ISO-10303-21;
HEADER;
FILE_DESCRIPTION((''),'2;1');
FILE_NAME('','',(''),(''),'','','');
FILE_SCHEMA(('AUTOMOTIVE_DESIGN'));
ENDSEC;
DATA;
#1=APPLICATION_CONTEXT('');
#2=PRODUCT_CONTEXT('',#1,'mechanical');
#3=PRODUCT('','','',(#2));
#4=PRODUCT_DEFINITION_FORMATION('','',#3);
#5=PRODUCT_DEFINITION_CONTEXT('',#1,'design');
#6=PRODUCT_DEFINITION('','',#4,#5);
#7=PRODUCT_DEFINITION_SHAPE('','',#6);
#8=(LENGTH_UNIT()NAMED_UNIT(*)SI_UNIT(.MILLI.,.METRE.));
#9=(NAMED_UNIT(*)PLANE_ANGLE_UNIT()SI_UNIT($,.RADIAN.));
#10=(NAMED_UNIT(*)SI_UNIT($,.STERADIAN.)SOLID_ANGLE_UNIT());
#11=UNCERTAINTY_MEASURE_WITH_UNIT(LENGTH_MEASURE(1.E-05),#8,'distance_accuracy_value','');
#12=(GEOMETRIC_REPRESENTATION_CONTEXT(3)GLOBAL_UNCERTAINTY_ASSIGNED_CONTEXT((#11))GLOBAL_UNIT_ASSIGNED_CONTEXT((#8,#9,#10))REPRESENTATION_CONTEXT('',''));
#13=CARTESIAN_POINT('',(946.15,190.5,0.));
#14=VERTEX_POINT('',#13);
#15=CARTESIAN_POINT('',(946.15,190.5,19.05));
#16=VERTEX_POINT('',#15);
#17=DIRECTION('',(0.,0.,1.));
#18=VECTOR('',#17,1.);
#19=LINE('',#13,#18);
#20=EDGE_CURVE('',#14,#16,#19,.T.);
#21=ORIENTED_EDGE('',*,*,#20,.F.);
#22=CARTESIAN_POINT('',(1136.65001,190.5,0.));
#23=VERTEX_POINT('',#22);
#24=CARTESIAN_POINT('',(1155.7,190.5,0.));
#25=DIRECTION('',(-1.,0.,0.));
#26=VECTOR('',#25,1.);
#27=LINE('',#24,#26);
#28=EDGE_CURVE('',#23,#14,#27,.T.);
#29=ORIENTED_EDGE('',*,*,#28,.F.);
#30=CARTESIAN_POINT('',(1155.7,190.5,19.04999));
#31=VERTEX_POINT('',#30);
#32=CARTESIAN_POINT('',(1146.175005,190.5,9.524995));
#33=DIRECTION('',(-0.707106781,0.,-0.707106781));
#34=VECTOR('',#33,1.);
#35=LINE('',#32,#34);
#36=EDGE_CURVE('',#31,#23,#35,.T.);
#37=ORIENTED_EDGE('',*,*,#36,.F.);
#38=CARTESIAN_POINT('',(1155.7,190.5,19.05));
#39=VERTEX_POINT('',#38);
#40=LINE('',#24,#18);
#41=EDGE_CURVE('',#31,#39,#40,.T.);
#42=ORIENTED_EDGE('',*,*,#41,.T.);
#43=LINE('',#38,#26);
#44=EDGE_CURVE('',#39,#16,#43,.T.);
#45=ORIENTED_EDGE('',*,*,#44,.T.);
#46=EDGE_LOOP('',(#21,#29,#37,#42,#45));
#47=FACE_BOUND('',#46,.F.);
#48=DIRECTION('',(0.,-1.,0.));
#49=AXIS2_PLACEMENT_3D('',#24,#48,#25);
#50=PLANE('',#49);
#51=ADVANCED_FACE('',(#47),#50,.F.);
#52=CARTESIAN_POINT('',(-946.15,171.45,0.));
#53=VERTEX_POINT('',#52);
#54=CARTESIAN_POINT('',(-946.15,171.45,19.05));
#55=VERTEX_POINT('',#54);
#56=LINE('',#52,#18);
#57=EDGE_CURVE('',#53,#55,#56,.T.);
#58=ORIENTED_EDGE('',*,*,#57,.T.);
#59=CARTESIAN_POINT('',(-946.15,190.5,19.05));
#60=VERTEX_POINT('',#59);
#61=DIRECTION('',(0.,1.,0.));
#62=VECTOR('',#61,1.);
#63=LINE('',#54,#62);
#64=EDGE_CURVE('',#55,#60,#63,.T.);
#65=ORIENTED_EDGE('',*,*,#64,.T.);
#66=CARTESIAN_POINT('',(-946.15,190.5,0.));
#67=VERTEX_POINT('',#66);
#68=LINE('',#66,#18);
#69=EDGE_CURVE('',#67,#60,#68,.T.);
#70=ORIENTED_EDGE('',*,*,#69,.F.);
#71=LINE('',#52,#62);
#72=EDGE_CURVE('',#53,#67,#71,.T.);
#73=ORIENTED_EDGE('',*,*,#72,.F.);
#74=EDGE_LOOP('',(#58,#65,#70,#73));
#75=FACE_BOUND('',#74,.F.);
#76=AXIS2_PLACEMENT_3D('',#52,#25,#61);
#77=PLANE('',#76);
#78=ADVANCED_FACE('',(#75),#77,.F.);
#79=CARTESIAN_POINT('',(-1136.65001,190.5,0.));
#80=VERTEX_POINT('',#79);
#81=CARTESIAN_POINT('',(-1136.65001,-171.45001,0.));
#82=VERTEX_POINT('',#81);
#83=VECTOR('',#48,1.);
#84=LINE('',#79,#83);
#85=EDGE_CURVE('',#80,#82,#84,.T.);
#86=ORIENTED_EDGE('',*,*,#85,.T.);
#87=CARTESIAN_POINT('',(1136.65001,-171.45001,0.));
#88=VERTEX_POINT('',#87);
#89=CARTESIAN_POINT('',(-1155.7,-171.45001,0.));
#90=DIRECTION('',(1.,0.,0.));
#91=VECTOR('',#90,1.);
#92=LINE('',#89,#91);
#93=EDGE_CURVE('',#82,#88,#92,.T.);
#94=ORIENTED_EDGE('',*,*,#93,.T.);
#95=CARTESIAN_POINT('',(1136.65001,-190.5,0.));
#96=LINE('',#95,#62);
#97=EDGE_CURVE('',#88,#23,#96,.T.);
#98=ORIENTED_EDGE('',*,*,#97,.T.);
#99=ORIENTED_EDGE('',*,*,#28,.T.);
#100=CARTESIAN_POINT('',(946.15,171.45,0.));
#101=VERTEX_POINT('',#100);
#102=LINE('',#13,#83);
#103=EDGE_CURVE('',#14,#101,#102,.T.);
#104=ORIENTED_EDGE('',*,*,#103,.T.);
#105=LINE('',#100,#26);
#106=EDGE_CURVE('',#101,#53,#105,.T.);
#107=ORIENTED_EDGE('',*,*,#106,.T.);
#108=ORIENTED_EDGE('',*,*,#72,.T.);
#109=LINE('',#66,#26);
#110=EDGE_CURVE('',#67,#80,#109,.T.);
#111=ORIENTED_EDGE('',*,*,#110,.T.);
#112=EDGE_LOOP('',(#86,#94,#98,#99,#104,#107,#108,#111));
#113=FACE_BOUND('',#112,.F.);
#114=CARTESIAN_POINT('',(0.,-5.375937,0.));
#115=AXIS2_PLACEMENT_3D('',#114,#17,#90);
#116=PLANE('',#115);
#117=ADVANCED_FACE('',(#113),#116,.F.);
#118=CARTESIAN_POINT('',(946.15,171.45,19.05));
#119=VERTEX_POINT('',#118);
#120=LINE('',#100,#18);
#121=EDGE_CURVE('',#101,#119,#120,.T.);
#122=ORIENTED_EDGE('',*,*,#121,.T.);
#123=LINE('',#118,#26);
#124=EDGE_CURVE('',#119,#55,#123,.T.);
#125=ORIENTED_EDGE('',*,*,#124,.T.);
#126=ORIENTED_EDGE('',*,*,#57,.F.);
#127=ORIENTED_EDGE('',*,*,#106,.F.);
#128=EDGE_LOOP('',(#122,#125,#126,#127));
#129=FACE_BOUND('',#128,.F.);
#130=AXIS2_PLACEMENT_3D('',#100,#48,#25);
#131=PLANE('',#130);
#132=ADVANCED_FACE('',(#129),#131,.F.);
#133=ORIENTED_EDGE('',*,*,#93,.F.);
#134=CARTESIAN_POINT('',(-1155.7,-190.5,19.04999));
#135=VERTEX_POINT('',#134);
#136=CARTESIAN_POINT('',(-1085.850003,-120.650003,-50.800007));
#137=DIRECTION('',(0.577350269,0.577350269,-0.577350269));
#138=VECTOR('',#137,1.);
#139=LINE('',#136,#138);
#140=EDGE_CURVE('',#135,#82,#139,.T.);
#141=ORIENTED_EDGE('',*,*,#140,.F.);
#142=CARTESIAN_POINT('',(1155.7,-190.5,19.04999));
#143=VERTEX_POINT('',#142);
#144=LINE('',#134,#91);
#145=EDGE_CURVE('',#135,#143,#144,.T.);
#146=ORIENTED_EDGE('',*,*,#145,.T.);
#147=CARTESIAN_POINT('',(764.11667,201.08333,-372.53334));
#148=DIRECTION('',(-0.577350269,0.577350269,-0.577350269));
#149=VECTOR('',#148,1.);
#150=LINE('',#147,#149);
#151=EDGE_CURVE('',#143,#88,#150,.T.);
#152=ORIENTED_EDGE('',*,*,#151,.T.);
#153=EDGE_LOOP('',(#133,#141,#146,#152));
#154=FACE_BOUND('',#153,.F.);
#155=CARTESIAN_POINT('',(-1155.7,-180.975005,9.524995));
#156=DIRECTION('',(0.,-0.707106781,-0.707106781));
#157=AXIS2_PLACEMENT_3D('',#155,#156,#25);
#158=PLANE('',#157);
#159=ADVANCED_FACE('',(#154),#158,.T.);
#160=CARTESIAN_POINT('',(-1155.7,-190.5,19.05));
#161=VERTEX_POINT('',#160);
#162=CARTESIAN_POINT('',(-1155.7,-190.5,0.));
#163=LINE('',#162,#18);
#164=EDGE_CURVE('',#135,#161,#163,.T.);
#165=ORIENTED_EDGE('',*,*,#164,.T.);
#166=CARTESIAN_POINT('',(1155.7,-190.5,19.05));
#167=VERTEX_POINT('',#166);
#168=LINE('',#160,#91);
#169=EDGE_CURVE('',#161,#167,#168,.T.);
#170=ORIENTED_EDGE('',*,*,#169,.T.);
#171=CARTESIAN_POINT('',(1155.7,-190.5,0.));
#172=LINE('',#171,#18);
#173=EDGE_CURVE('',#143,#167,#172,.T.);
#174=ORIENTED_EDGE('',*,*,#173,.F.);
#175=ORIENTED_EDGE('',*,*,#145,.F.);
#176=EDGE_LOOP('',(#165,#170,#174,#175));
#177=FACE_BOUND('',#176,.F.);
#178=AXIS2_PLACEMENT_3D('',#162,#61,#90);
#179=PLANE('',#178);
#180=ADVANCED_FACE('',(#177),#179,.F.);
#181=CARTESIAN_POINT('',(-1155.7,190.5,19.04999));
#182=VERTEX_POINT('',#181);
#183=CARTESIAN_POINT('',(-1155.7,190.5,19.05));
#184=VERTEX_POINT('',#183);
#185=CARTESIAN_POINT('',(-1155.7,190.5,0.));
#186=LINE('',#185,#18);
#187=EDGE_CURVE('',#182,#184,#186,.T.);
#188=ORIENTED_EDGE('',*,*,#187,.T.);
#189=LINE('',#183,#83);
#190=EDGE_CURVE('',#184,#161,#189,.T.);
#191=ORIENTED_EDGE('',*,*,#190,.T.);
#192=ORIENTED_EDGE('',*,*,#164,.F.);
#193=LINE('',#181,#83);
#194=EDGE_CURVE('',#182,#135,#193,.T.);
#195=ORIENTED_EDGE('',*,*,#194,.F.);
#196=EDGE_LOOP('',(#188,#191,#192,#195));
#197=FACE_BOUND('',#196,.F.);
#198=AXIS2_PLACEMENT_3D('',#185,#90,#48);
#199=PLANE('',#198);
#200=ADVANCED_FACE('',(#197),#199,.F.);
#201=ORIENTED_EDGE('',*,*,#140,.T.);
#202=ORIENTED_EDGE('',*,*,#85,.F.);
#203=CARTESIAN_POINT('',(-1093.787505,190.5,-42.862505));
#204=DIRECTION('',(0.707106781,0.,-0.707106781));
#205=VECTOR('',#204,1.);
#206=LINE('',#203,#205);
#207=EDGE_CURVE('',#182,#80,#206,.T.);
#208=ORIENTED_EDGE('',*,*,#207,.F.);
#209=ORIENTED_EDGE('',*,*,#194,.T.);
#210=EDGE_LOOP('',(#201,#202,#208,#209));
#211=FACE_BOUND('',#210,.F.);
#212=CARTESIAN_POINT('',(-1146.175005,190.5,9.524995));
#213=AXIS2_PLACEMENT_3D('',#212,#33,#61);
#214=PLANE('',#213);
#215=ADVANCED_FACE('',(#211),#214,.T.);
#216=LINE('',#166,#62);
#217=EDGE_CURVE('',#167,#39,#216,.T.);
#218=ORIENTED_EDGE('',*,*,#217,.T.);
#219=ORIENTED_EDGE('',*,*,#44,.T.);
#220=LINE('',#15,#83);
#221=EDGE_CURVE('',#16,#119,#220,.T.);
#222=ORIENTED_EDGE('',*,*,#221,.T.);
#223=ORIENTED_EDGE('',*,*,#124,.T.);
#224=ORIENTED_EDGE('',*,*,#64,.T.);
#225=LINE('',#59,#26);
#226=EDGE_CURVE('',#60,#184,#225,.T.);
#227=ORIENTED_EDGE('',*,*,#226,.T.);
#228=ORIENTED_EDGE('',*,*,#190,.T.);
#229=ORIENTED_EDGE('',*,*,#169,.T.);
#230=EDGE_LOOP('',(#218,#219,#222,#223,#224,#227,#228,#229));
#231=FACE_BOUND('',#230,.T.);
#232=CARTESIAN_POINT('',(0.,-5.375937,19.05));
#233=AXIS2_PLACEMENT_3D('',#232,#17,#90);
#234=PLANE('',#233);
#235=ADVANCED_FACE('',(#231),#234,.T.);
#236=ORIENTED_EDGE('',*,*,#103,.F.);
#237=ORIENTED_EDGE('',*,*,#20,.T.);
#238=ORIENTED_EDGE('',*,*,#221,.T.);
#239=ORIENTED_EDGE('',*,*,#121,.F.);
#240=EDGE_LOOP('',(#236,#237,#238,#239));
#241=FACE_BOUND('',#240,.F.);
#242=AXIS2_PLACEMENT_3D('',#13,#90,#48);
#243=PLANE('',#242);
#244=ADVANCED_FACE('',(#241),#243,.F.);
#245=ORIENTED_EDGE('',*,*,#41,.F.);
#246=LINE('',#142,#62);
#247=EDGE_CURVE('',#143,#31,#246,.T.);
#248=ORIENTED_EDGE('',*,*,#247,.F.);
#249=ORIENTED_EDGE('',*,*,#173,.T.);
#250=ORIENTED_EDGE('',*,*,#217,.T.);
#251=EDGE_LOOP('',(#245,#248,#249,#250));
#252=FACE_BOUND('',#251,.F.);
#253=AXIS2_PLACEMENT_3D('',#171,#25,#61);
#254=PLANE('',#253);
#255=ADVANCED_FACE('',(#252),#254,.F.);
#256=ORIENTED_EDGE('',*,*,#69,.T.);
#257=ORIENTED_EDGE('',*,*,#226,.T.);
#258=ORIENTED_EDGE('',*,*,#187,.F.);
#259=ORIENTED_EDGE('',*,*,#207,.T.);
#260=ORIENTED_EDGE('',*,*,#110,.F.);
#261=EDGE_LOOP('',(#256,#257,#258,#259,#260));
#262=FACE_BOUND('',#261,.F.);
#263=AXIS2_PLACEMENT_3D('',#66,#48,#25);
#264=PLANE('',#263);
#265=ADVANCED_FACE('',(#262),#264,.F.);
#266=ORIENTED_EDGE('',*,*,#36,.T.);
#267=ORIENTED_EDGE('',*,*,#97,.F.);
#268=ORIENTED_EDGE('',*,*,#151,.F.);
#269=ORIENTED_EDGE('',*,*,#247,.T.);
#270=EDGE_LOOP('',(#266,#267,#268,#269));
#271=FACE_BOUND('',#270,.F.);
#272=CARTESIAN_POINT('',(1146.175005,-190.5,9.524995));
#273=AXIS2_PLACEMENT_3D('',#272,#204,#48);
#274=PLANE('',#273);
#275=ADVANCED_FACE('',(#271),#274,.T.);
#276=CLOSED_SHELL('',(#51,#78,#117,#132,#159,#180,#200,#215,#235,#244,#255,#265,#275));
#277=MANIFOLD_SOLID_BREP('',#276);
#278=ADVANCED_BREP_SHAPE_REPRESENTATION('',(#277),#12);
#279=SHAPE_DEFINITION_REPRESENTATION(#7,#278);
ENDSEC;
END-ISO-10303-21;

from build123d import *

# Parameters (mm, degrees)
F1_DEPTH = 19.05
F2_SIZE  = 19.04999


# Not quite as in the source:
# - a fillet or chamfer is up to 0.001 mm smaller than in the source, because OpenCascade refuses the exact size


with BuildPart() as f1:
    # F0 (on Top) → F1 (new body)
    with BuildSketch(Plane.XY):
        Polygon((-1155.7, -190.5), (1155.7, -190.5), (1155.7, 190.5), (946.15, 190.5), (946.15, 171.45), (-946.15, 171.45), (-946.15, 190.5), (-1155.7, 190.5), align=None)
    extrude(amount=F1_DEPTH)

    # F2 (size 19.05 in the source; OpenCascade refuses exactly that, so slightly less here)
    f2_edges = [f1.edges().sort_by_distance(p)[0] for p in [
        (-1155.7, 0, 0),
        (0, -190.5, 0),
        (1155.7, 0, 0),
    ]]
    chamfer(f2_edges, length=F2_SIZE)


solid = f1.part
